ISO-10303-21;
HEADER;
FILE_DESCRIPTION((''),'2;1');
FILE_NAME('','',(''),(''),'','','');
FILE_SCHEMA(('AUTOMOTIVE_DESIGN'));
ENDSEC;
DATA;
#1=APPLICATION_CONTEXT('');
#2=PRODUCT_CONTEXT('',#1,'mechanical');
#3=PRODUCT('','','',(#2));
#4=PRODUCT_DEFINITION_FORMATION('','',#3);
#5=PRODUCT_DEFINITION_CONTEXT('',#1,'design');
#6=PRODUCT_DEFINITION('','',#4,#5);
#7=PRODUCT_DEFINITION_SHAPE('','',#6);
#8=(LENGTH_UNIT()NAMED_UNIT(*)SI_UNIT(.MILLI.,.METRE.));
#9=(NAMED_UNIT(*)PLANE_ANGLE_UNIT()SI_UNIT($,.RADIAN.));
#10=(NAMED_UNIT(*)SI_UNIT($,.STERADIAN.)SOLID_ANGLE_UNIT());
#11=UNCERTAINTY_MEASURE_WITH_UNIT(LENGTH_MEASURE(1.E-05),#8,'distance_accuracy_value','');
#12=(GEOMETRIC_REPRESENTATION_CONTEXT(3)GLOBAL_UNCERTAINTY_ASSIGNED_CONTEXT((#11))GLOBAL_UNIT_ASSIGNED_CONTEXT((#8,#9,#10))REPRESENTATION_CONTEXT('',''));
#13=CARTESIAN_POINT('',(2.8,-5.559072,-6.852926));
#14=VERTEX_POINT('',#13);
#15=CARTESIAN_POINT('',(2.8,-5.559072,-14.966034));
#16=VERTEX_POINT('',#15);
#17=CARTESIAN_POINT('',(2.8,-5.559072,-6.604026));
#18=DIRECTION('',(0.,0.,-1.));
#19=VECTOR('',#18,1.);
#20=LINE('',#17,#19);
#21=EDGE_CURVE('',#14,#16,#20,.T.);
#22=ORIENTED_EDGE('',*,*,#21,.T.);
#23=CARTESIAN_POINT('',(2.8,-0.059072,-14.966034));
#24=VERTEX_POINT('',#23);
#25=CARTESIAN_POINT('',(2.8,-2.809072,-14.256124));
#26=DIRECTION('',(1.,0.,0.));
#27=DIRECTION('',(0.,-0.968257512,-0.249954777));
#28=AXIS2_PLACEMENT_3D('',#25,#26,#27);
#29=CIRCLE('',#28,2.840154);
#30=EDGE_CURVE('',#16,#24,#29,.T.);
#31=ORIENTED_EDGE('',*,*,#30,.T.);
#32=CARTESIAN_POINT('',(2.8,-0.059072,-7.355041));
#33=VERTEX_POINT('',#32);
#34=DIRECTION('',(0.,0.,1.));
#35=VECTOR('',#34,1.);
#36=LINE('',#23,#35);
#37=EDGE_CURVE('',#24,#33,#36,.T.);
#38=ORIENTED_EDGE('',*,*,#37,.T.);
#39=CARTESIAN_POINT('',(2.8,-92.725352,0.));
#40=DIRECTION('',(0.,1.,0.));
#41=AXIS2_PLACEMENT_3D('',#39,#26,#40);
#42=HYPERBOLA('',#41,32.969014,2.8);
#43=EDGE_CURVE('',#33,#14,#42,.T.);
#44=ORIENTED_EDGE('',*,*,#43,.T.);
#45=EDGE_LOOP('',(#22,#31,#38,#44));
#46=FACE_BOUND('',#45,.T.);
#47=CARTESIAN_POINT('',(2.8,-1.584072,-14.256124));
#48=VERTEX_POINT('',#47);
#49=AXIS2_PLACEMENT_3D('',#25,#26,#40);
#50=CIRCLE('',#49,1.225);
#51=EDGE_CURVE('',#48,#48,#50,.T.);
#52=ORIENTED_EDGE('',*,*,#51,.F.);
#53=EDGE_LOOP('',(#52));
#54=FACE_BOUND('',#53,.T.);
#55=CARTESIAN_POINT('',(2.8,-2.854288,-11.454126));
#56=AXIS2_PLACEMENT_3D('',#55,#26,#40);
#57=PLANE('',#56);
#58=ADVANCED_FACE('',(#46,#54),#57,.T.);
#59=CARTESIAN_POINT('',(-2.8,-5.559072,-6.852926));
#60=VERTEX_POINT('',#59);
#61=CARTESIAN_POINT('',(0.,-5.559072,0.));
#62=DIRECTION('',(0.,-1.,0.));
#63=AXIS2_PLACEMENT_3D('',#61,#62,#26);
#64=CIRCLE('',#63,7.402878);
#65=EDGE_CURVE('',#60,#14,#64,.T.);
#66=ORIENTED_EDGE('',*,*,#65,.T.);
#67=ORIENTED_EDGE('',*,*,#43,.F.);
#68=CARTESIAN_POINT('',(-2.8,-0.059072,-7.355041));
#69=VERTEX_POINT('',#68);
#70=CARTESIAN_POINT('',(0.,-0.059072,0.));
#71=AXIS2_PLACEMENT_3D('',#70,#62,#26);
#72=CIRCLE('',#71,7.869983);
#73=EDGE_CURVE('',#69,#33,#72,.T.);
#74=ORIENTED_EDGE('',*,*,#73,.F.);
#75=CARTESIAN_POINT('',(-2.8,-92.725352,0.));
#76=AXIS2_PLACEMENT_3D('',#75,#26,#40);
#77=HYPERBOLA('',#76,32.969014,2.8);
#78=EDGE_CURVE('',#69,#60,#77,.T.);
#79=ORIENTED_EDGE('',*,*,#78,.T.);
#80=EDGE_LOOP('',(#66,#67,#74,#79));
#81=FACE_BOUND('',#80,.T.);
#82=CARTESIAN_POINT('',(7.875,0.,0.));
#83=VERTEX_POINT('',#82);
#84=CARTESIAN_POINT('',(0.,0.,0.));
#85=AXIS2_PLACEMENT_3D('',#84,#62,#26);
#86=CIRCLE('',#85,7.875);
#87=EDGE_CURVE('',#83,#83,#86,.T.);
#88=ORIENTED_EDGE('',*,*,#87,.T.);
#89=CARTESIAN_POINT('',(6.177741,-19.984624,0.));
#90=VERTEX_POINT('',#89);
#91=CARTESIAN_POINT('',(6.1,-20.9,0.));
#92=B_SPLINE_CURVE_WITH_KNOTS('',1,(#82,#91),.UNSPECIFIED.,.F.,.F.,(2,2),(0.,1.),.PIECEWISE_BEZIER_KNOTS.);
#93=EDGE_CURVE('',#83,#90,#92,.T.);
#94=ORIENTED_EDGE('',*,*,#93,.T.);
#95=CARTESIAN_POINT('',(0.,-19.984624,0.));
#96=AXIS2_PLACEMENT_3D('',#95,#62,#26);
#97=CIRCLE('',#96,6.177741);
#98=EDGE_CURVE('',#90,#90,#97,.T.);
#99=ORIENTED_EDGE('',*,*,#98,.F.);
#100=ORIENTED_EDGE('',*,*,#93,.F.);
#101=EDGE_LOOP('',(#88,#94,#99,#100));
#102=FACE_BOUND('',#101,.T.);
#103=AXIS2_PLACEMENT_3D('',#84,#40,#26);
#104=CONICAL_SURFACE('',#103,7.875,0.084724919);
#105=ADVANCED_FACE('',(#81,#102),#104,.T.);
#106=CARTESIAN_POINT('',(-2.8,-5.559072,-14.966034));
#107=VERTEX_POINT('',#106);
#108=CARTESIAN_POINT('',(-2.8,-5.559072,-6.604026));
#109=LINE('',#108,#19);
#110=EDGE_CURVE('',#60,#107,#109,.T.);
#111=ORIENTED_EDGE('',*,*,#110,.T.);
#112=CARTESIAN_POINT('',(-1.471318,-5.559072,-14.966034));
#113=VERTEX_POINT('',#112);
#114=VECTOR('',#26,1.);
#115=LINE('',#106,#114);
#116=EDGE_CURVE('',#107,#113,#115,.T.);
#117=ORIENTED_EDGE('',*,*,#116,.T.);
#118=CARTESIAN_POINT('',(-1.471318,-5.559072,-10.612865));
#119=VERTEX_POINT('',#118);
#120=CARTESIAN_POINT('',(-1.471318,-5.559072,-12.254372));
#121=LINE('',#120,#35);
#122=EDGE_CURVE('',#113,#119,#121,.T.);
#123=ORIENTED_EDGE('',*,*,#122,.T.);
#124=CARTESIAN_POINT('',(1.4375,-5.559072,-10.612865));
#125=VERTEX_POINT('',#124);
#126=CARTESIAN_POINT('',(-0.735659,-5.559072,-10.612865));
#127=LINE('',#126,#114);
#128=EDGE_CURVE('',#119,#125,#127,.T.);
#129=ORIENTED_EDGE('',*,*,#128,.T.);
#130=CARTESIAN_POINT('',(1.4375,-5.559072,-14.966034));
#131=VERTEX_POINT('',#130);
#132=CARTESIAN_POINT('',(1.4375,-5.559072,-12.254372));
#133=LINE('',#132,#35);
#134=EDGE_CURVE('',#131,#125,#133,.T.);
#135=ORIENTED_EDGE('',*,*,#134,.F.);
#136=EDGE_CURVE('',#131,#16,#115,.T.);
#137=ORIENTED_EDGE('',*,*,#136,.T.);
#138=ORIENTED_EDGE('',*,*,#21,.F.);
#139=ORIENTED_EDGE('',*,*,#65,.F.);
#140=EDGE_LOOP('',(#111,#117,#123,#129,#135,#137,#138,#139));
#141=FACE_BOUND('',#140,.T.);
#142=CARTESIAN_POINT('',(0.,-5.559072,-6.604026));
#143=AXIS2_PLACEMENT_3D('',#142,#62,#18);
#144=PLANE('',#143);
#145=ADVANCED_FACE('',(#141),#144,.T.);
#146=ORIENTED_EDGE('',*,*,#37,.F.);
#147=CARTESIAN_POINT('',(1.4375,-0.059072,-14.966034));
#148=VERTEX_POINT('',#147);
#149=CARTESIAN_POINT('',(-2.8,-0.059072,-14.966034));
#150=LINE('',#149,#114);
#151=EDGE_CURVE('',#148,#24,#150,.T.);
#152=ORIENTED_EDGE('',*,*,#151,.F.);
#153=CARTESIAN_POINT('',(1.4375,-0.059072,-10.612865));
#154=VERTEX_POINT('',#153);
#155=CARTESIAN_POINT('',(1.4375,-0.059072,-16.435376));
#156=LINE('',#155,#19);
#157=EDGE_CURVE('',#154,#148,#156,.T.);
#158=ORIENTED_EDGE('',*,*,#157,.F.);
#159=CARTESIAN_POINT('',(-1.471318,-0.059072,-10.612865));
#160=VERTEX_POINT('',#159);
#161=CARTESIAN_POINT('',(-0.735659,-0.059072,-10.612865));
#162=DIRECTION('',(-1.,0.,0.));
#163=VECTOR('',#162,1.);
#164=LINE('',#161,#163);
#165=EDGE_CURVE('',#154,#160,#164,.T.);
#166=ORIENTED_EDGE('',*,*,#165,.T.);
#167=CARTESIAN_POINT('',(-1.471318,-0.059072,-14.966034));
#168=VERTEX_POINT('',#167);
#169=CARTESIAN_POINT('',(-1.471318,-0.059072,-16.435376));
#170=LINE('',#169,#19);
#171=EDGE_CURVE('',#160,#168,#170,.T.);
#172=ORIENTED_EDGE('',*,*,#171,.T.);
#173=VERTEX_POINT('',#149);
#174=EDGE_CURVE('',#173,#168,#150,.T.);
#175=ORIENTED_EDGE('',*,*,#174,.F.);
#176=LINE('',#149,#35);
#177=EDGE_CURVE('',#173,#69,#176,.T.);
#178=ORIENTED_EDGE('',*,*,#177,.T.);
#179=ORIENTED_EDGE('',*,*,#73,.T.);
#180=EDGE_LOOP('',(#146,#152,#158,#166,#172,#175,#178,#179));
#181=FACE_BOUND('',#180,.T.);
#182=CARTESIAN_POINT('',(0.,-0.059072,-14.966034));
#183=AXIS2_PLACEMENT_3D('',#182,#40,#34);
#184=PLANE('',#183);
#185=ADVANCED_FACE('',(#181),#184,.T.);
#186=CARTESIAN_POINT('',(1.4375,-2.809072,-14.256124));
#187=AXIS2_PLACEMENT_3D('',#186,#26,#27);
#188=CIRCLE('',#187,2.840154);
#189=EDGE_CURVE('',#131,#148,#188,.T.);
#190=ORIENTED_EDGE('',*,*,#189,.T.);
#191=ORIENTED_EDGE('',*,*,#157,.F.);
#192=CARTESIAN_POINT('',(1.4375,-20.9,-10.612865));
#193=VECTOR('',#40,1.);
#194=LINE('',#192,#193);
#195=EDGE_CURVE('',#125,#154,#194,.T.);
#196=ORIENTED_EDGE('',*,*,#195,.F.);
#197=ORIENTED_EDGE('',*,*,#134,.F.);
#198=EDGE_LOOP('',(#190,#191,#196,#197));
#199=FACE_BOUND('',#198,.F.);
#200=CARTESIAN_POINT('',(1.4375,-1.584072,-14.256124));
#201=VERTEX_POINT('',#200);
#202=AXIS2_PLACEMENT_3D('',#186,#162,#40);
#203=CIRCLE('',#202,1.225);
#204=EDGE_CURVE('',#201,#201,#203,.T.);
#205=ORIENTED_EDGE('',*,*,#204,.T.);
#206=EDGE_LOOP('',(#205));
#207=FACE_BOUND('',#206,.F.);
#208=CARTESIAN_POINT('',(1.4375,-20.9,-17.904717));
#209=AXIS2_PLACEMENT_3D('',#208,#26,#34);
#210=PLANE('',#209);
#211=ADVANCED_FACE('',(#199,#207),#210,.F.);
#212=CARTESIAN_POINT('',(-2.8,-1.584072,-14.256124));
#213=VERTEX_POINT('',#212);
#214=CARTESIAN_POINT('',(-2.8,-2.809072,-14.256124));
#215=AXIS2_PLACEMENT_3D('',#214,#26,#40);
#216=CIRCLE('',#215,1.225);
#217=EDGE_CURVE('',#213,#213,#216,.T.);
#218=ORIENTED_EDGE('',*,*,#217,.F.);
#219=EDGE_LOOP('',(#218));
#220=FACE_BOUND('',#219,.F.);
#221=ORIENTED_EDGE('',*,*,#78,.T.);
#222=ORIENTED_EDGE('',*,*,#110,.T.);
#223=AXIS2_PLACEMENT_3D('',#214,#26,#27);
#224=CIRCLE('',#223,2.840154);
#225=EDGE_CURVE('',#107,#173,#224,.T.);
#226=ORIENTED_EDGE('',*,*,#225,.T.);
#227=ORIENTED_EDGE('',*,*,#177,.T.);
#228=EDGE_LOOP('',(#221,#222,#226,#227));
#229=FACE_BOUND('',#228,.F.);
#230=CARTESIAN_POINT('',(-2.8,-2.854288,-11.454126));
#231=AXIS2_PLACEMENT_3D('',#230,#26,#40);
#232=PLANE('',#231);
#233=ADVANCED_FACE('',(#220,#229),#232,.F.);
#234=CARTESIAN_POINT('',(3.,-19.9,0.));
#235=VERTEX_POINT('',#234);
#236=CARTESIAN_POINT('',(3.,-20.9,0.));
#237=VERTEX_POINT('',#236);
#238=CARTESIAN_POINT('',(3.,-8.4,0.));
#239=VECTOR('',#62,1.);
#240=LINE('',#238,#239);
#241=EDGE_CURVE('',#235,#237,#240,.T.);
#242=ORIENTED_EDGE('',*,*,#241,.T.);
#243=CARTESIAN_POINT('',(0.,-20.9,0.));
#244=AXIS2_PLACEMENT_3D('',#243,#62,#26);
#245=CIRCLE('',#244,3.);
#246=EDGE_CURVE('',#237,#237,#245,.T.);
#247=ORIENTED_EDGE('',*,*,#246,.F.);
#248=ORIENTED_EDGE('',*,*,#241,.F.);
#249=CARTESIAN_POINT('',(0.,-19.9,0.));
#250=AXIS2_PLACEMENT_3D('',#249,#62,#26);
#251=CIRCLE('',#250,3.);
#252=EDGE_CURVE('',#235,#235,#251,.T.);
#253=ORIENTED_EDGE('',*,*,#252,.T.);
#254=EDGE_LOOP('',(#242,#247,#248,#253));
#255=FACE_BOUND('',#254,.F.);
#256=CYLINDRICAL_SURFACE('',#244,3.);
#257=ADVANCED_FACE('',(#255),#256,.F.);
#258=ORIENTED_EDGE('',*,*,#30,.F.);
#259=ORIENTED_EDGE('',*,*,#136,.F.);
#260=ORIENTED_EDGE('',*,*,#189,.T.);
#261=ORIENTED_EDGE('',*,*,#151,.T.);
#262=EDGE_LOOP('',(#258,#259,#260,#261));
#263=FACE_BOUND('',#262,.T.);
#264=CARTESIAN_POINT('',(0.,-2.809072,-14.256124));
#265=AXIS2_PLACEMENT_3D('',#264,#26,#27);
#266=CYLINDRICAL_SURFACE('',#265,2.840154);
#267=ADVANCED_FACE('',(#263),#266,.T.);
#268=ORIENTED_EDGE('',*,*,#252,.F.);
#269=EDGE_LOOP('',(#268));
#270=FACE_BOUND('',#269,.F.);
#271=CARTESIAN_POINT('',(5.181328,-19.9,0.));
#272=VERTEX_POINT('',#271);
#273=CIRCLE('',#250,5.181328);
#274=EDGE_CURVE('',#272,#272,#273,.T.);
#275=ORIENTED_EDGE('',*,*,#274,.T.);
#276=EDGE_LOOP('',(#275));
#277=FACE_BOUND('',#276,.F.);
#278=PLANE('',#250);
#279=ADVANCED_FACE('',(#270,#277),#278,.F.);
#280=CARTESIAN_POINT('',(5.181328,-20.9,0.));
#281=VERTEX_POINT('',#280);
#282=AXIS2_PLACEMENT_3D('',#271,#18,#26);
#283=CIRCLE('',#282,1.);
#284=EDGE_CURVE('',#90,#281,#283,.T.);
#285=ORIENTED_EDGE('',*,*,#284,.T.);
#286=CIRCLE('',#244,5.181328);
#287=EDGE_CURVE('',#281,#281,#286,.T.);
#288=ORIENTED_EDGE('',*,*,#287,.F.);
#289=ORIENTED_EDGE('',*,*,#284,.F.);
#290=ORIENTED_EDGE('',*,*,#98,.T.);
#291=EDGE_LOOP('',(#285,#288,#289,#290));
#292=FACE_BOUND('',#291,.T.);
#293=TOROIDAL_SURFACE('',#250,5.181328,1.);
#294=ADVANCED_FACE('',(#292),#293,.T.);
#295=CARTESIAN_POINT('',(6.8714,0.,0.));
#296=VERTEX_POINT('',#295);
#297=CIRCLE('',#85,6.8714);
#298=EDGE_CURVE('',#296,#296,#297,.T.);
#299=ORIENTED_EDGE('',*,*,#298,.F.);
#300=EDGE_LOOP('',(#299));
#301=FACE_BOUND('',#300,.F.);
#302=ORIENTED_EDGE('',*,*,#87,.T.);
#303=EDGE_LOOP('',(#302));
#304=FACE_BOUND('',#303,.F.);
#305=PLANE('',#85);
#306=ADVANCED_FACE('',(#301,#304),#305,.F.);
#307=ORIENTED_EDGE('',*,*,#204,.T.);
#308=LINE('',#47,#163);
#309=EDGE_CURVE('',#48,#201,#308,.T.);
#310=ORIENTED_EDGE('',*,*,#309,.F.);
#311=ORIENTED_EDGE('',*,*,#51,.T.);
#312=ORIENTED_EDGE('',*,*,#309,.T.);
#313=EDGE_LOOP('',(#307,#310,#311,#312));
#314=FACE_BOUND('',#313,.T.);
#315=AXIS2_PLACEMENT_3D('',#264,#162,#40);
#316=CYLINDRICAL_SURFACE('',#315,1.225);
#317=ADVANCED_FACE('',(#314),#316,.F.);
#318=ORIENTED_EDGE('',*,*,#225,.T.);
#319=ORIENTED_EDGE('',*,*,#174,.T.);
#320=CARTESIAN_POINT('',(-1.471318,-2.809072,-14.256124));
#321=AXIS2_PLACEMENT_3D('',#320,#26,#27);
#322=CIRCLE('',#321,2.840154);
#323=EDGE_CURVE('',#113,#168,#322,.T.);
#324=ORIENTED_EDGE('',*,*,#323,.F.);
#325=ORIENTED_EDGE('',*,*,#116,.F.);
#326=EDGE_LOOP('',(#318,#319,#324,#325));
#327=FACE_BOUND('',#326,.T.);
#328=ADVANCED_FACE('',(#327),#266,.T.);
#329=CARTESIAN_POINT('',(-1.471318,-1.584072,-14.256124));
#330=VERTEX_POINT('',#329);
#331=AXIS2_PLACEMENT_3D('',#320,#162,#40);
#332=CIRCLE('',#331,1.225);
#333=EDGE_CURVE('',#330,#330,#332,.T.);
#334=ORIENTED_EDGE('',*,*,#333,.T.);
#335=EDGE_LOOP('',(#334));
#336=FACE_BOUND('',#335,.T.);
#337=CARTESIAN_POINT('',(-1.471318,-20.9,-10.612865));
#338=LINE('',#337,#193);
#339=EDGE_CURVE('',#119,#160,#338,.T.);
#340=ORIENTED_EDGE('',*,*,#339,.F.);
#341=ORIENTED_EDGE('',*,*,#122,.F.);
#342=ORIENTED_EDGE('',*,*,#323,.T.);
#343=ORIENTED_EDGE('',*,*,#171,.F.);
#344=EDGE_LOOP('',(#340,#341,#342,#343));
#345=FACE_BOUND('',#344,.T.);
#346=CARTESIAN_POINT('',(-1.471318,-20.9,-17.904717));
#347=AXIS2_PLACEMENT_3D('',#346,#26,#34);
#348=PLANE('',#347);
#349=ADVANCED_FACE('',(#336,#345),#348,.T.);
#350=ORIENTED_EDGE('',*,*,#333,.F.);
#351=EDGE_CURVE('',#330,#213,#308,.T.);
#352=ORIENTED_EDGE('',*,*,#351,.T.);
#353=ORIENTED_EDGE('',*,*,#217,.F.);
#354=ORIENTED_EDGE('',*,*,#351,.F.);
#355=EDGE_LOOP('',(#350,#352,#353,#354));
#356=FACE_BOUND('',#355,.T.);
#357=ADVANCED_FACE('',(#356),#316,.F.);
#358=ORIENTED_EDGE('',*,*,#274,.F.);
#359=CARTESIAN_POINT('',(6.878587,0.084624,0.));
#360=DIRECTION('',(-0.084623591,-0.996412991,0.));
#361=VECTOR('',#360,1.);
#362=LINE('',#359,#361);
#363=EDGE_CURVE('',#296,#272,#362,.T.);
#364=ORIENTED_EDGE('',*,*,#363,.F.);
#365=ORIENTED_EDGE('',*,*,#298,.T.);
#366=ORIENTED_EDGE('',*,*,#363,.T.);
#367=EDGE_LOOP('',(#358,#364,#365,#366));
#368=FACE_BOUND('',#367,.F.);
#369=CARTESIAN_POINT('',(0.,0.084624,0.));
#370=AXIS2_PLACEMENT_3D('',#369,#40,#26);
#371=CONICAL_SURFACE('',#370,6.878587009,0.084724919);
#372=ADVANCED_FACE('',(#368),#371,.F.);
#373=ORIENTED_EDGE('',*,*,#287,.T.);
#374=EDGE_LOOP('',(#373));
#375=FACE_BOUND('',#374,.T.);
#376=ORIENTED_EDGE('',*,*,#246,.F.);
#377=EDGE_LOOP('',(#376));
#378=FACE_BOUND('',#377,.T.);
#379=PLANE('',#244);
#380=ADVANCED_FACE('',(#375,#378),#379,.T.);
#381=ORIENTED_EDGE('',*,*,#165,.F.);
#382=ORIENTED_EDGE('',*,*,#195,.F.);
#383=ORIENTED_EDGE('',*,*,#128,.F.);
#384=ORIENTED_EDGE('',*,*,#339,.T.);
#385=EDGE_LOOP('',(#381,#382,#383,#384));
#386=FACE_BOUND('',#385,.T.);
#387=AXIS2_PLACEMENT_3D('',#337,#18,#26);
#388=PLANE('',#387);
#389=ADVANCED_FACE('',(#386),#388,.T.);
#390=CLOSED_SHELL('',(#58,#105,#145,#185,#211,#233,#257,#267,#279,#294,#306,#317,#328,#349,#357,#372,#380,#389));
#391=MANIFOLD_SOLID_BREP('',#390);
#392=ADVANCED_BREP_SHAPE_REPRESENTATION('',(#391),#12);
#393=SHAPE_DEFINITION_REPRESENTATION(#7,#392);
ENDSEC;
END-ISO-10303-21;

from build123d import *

# Parameters (mm, degrees)
F0_R      = 7.875
F2_R      = 6.1
F4_T      = -1
F5_R      = 3
F6_DEPTH  = 12.5
F7_R      = 1.225
F8_DEPTH  = 2.8
F9_W      = 2.908817606
F9_H      = 7.2918525926
F10_DEPTH = 20.9010001
F11_R     = 1


with BuildPart() as f3:
    # F0 (on Front) → F3 section 0
    with BuildSketch(Plane.XZ):
        Circle(F0_R)
    # F2 (on offset) → F3 section 1
    with BuildSketch(Plane.XZ.offset(20.9)):
        Circle(F2_R)
    loft()

    # F4
    f4_openings = [f3.faces().sort_by_distance(p)[0] for p in [
        (0, 0, 0),
    ]]
    offset(amount=F4_T, openings=f4_openings, kind=Kind.INTERSECTION)

    # F5 (on offset) → F6 (cut, symmetric)
    with BuildSketch(Plane.XZ.offset(20.9)):
        Circle(F5_R)
    extrude(amount=F6_DEPTH, both=True, mode=Mode.SUBTRACT)

    # F7 (on Right) → F8 (join, symmetric)
    with BuildSketch(Plane.YZ):
        with BuildLine():
            Line((-5.5590723408, -6.6040260717), (-5.5590723408, -14.9660339587))
            ThreePointArc((-5.5590723408, -14.9660339587), (-2.8090723408, -17.0962775531), (-0.0590723408, -14.9660339587))
            Line((-0.0590723408, -14.9660339587), (-0.0590723408, -7.0811193436))
            Line((-0.0590723408, -7.0811193436), (-5.5590723408, -6.6040260717))
        make_face()
        with Locations((-2.8090723408, -14.256124013)):
            Circle(F7_R, mode=Mode.SUBTRACT)
    extrude(amount=F8_DEPTH, both=True)

    # F9 (on offset) → F10 (cut, through all)
    with BuildSketch(Plane.XZ.offset(20.9)):
        with Locations((-0.016908803, -14.2587911789)):
            Rectangle(F9_W, F9_H)
    extrude(amount=-F10_DEPTH, mode=Mode.SUBTRACT)

    # F11
    f11_edges = [f3.edges().sort_by_distance(p)[0] for p in [
        (-6.1, -20.9, 0),
    ]]
    fillet(f11_edges, radius=F11_R)


solid = f3.part
